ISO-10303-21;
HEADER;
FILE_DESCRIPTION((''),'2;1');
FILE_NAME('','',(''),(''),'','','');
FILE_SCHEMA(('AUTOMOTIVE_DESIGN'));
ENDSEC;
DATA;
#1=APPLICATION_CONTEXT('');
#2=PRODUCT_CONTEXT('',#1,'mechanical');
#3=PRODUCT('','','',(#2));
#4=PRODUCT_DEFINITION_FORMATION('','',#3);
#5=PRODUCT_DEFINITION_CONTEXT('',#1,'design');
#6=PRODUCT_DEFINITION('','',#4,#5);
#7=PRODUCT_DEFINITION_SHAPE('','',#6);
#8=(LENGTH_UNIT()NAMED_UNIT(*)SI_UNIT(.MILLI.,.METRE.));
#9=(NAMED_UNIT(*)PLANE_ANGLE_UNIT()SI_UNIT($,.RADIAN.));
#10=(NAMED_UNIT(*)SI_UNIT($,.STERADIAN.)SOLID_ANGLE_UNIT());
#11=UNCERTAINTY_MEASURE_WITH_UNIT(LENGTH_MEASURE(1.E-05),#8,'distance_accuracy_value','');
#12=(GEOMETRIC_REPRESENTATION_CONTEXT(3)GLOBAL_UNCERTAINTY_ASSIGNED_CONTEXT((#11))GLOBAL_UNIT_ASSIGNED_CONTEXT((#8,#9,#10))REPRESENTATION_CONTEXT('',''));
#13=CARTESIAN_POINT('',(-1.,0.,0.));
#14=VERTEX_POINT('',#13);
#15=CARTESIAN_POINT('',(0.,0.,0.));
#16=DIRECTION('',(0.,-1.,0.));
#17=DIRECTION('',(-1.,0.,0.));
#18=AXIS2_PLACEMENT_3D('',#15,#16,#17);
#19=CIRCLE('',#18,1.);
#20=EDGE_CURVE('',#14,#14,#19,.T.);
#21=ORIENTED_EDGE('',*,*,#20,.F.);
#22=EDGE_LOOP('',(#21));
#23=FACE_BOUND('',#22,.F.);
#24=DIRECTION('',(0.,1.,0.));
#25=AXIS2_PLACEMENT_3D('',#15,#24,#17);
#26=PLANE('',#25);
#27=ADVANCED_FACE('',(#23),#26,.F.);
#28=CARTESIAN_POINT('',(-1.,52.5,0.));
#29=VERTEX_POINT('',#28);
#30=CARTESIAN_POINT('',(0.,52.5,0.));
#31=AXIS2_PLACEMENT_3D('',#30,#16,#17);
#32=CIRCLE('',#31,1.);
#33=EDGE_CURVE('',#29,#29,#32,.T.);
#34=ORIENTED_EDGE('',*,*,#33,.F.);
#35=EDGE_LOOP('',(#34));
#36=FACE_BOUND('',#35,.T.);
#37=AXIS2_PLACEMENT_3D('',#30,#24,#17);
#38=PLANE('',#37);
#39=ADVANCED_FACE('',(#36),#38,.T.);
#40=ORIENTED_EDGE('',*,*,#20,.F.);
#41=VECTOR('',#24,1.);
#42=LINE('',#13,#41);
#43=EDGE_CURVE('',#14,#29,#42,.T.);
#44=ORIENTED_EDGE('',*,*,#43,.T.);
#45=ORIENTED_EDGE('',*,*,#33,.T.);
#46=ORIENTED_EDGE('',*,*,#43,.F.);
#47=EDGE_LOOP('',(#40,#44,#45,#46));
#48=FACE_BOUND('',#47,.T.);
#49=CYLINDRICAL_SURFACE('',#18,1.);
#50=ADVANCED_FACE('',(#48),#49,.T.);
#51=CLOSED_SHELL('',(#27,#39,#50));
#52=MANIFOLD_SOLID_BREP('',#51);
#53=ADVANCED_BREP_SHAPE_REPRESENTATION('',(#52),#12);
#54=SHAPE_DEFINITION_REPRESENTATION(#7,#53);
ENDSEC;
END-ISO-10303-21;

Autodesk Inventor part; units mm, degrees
ref_plane "YZ Plane" through (0, 0, 0) normal (1, 0, 0) x (0, 1, 0)
ref_plane "XZ Plane" through (0, 0, 0) normal (0, 1, 0) x (-1, 0, 0)
ref_plane "XY Plane" through (0, 0, 0) normal (0, 0, 1) x (1, 0, 0)
sketch "Sketch1" plane through (0, 0, 0) normal (0, 1, 0) x (-1, 0, 0)
  circle A0 centre (0, 0) radius 1
  dimension "d0" = 2
extrude "Extrusion1" add sketch "Sketch1" along normal blind 55
move faces "Move1" translate (0, -2.5, 0) faces at (-0.5848, 55, -0.397)
properties part number "LaserBeamCenter2"
